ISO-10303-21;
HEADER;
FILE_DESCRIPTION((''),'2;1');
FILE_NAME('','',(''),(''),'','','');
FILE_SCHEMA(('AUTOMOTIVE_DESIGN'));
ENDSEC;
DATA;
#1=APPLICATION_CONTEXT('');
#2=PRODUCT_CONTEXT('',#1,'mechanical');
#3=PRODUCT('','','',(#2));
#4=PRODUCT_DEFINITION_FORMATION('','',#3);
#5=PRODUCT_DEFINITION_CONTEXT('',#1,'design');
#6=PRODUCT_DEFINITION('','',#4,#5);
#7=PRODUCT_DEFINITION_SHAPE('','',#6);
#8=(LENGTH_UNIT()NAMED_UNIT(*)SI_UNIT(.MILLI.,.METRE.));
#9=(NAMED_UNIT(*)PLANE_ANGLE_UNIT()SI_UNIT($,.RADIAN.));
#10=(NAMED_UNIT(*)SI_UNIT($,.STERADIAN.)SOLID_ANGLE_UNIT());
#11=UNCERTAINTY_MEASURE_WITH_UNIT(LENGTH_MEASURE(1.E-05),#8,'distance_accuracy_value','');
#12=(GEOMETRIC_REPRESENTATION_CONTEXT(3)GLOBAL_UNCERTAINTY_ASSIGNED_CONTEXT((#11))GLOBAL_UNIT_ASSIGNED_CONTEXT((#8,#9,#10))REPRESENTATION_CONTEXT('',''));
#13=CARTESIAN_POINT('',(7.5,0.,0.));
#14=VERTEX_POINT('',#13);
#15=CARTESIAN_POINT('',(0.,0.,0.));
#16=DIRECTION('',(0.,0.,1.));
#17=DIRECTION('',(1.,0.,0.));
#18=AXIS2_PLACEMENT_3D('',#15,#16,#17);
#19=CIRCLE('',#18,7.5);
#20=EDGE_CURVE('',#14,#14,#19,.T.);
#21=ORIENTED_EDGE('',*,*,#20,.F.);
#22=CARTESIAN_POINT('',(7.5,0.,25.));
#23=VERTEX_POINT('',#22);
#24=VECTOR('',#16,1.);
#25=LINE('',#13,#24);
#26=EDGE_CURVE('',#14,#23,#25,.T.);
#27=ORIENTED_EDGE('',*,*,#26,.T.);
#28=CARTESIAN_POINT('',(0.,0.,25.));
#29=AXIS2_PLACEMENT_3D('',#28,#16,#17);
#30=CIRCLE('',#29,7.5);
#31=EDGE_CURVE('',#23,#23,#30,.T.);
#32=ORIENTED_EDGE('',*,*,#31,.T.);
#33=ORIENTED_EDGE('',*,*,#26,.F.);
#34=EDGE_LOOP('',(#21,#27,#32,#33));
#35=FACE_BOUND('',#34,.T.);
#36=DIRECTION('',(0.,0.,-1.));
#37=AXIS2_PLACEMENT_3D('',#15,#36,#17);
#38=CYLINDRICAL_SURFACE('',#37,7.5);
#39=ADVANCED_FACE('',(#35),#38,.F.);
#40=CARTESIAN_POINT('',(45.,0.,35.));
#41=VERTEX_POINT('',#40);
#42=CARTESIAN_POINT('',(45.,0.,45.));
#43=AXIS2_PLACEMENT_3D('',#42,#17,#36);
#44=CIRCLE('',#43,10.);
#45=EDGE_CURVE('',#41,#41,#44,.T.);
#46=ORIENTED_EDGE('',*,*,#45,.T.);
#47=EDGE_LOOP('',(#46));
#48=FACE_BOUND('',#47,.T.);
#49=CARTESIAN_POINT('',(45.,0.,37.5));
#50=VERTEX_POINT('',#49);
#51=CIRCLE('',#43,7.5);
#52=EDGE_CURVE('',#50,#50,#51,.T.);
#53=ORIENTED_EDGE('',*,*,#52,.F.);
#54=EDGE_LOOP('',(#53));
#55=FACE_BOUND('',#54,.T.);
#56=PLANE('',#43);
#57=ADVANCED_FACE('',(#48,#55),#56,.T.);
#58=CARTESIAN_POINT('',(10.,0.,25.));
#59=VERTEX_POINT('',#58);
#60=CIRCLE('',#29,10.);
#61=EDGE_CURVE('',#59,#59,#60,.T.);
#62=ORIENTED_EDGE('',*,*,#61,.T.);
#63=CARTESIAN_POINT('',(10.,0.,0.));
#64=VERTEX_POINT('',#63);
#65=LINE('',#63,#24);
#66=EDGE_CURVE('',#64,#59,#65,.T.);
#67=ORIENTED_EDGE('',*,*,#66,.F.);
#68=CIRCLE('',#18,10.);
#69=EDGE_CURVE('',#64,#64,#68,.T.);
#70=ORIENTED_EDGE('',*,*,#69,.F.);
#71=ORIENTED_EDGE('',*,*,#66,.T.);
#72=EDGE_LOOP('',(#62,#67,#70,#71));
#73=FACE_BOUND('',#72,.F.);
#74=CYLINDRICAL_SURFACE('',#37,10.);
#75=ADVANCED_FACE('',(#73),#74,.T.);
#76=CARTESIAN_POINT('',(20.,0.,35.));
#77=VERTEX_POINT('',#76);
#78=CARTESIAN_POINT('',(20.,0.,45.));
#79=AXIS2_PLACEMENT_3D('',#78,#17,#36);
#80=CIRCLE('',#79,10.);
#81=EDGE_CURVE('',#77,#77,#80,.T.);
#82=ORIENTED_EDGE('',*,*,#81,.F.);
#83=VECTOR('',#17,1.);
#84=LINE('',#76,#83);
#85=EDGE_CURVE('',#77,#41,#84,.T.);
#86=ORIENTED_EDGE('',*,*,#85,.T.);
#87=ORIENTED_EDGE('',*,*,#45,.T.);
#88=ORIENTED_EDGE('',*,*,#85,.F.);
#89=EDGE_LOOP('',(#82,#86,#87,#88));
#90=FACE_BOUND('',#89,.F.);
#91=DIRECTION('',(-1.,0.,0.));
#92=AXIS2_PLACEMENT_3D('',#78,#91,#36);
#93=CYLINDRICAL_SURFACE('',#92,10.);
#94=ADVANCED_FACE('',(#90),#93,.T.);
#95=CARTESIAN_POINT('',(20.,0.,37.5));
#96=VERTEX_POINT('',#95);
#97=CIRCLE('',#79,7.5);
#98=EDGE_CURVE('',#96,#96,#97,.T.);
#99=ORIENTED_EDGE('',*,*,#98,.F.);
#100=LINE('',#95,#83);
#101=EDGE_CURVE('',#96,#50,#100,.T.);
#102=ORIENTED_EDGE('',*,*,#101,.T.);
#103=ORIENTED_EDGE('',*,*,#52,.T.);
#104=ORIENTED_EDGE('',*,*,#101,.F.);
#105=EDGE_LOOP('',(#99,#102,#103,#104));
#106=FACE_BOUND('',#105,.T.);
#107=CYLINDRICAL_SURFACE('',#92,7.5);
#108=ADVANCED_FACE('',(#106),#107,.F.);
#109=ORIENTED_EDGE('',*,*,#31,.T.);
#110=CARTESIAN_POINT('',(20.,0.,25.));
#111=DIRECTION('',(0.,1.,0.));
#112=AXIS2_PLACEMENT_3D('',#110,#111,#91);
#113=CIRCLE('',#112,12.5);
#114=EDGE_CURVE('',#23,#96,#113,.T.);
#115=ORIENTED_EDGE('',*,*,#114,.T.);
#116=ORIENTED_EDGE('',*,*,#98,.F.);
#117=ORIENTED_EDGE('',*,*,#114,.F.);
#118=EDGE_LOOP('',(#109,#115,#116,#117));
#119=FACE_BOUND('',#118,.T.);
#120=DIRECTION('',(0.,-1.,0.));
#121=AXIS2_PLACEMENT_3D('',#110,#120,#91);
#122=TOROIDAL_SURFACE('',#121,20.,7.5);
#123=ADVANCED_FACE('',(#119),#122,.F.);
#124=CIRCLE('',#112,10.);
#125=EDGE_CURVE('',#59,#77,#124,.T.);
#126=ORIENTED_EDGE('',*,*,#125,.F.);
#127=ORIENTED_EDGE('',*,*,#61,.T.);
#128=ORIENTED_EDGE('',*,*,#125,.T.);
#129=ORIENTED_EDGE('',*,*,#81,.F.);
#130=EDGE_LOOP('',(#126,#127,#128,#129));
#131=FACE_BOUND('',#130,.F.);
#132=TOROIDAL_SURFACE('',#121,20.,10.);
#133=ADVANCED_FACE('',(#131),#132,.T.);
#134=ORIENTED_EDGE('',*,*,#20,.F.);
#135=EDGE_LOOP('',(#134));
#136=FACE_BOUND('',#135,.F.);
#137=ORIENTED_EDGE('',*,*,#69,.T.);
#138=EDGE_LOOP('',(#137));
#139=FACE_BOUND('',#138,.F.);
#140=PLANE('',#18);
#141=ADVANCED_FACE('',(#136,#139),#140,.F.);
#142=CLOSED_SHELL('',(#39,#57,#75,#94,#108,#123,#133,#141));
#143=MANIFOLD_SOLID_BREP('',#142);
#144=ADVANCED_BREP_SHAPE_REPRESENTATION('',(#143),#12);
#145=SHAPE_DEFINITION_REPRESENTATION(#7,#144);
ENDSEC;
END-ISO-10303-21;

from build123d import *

# Parameters (mm, degrees)
F0_R     = 10
F0_R_2   = 7.5
F1_DEPTH = 25
F3_R     = 10
F3_R_2   = 7.5
F4_ANGLE = 90
F5_DEPTH = 25


with BuildPart() as f1:
    # F0 (on Top) → F1 (new body)
    with BuildSketch(Plane.XY):
        Circle(F0_R)
        Circle(F0_R_2, mode=Mode.SUBTRACT)
    extrude(amount=F1_DEPTH)

    # F3 (on face) → F4 (revolve)
    with BuildSketch(Plane.XY.offset(25)):
        Circle(F3_R)
        Circle(F3_R_2, mode=Mode.SUBTRACT)
    revolve(axis=Axis((20, 0.0099948445, 25), (0, 1, 0)), revolution_arc=F4_ANGLE)

    # F5 (add): a face of the model
    f5_faces = [f1.faces().sort_by_distance(p)[0] for p in [
        (20, 0, 54.7171572875),
    ]]
    extrude(f5_faces, amount=F5_DEPTH)


solid = f1.part
